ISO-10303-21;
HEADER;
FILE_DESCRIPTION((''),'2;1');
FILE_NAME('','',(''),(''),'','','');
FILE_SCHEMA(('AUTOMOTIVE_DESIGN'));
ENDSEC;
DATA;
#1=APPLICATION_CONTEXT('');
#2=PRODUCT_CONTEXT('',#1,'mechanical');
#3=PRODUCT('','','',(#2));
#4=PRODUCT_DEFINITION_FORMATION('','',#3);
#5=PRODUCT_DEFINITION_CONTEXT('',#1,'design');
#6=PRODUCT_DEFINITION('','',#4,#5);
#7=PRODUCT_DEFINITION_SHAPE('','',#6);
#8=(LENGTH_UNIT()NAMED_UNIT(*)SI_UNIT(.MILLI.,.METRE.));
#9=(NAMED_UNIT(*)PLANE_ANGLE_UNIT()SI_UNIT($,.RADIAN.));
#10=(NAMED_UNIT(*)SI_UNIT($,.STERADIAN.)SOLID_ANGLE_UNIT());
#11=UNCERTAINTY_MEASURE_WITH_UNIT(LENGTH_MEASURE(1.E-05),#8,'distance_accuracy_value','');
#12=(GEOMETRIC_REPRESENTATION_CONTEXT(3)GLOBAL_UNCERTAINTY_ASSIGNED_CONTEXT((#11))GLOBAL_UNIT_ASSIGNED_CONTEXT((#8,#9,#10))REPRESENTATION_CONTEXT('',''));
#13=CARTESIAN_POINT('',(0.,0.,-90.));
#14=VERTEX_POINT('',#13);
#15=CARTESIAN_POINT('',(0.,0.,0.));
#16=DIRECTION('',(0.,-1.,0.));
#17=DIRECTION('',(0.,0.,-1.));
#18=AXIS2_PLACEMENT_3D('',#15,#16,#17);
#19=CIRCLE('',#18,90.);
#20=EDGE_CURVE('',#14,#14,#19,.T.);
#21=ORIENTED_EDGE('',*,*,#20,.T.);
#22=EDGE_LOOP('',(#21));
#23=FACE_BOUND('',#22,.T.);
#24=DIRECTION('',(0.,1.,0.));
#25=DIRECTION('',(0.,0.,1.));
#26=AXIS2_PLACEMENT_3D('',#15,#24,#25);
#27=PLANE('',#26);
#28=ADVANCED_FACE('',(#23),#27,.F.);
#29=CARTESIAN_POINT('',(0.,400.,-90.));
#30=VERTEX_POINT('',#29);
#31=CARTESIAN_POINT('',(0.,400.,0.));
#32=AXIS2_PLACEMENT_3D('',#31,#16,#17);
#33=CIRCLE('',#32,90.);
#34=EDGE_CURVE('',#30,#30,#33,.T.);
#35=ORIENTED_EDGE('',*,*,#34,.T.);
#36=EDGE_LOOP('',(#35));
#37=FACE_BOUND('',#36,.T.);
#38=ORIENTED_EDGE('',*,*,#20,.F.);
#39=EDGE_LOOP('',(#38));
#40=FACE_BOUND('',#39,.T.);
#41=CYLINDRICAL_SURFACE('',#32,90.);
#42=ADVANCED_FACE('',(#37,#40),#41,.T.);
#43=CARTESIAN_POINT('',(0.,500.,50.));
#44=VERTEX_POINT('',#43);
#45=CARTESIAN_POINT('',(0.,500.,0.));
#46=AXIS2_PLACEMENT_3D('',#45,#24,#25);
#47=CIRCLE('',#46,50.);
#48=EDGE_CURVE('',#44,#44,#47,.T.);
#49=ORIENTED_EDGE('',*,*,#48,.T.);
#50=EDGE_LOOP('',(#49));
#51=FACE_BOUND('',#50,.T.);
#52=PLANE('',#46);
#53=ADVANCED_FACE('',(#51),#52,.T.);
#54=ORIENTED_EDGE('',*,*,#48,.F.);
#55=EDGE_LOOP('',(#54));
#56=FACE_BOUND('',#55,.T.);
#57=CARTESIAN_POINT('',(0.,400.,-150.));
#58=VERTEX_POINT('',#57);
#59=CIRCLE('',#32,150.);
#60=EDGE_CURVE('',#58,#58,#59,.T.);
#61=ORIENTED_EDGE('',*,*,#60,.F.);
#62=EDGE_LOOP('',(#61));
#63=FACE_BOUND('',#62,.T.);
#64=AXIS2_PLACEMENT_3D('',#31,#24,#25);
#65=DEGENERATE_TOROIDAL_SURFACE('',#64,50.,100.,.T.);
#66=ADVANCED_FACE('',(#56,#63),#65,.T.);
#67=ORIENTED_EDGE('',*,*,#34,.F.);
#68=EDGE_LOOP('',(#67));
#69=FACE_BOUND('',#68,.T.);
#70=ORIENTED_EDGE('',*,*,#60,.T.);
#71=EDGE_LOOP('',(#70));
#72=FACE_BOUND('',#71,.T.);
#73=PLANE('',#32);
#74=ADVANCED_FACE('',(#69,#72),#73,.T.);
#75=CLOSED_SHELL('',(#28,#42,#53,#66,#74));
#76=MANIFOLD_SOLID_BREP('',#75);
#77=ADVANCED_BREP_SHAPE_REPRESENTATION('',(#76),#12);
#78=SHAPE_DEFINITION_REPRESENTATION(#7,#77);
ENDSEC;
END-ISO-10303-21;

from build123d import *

# Parameters (mm, degrees)
SKETCH1_R           = 150
BOSS_EXTRUDE1_DEPTH = 500
SKETCH2_R           = 150
SKETCH2_R_2         = 90
CUT_EXTRUDE1_DEPTH  = 400
FILLET1_R           = 100


with BuildPart() as part:
    # Sketch1 → Boss-Extrude1 (new body)
    with BuildSketch(Plane(origin=(0, 0, 0), x_dir=(1, 0, 0), z_dir=(0, 1, 0))):
        with Locations(Location((0, 0, 0), (0, 0, 270))):
            Circle(SKETCH1_R)
    extrude(amount=BOSS_EXTRUDE1_DEPTH)

    # Sketch2 → Cut-Extrude1 (cut)
    with BuildSketch(Plane.XZ):
        with Locations(Location((0, 0, 0), (0, 0, 270))):
            Circle(SKETCH2_R)
        with Locations(Location((0, 0, 0), (0, 0, 270))):
            Circle(SKETCH2_R_2, mode=Mode.SUBTRACT)
    extrude(amount=-CUT_EXTRUDE1_DEPTH, mode=Mode.SUBTRACT)

    # Fillet1
    fillet1_edges = [part.edges().sort_by_distance(p)[0] for p in [
        (0, 500, -150),
    ]]
    fillet(fillet1_edges, radius=FILLET1_R - 0.0001)  # a hair under: the kernel refuses the full size


solid = part.part
